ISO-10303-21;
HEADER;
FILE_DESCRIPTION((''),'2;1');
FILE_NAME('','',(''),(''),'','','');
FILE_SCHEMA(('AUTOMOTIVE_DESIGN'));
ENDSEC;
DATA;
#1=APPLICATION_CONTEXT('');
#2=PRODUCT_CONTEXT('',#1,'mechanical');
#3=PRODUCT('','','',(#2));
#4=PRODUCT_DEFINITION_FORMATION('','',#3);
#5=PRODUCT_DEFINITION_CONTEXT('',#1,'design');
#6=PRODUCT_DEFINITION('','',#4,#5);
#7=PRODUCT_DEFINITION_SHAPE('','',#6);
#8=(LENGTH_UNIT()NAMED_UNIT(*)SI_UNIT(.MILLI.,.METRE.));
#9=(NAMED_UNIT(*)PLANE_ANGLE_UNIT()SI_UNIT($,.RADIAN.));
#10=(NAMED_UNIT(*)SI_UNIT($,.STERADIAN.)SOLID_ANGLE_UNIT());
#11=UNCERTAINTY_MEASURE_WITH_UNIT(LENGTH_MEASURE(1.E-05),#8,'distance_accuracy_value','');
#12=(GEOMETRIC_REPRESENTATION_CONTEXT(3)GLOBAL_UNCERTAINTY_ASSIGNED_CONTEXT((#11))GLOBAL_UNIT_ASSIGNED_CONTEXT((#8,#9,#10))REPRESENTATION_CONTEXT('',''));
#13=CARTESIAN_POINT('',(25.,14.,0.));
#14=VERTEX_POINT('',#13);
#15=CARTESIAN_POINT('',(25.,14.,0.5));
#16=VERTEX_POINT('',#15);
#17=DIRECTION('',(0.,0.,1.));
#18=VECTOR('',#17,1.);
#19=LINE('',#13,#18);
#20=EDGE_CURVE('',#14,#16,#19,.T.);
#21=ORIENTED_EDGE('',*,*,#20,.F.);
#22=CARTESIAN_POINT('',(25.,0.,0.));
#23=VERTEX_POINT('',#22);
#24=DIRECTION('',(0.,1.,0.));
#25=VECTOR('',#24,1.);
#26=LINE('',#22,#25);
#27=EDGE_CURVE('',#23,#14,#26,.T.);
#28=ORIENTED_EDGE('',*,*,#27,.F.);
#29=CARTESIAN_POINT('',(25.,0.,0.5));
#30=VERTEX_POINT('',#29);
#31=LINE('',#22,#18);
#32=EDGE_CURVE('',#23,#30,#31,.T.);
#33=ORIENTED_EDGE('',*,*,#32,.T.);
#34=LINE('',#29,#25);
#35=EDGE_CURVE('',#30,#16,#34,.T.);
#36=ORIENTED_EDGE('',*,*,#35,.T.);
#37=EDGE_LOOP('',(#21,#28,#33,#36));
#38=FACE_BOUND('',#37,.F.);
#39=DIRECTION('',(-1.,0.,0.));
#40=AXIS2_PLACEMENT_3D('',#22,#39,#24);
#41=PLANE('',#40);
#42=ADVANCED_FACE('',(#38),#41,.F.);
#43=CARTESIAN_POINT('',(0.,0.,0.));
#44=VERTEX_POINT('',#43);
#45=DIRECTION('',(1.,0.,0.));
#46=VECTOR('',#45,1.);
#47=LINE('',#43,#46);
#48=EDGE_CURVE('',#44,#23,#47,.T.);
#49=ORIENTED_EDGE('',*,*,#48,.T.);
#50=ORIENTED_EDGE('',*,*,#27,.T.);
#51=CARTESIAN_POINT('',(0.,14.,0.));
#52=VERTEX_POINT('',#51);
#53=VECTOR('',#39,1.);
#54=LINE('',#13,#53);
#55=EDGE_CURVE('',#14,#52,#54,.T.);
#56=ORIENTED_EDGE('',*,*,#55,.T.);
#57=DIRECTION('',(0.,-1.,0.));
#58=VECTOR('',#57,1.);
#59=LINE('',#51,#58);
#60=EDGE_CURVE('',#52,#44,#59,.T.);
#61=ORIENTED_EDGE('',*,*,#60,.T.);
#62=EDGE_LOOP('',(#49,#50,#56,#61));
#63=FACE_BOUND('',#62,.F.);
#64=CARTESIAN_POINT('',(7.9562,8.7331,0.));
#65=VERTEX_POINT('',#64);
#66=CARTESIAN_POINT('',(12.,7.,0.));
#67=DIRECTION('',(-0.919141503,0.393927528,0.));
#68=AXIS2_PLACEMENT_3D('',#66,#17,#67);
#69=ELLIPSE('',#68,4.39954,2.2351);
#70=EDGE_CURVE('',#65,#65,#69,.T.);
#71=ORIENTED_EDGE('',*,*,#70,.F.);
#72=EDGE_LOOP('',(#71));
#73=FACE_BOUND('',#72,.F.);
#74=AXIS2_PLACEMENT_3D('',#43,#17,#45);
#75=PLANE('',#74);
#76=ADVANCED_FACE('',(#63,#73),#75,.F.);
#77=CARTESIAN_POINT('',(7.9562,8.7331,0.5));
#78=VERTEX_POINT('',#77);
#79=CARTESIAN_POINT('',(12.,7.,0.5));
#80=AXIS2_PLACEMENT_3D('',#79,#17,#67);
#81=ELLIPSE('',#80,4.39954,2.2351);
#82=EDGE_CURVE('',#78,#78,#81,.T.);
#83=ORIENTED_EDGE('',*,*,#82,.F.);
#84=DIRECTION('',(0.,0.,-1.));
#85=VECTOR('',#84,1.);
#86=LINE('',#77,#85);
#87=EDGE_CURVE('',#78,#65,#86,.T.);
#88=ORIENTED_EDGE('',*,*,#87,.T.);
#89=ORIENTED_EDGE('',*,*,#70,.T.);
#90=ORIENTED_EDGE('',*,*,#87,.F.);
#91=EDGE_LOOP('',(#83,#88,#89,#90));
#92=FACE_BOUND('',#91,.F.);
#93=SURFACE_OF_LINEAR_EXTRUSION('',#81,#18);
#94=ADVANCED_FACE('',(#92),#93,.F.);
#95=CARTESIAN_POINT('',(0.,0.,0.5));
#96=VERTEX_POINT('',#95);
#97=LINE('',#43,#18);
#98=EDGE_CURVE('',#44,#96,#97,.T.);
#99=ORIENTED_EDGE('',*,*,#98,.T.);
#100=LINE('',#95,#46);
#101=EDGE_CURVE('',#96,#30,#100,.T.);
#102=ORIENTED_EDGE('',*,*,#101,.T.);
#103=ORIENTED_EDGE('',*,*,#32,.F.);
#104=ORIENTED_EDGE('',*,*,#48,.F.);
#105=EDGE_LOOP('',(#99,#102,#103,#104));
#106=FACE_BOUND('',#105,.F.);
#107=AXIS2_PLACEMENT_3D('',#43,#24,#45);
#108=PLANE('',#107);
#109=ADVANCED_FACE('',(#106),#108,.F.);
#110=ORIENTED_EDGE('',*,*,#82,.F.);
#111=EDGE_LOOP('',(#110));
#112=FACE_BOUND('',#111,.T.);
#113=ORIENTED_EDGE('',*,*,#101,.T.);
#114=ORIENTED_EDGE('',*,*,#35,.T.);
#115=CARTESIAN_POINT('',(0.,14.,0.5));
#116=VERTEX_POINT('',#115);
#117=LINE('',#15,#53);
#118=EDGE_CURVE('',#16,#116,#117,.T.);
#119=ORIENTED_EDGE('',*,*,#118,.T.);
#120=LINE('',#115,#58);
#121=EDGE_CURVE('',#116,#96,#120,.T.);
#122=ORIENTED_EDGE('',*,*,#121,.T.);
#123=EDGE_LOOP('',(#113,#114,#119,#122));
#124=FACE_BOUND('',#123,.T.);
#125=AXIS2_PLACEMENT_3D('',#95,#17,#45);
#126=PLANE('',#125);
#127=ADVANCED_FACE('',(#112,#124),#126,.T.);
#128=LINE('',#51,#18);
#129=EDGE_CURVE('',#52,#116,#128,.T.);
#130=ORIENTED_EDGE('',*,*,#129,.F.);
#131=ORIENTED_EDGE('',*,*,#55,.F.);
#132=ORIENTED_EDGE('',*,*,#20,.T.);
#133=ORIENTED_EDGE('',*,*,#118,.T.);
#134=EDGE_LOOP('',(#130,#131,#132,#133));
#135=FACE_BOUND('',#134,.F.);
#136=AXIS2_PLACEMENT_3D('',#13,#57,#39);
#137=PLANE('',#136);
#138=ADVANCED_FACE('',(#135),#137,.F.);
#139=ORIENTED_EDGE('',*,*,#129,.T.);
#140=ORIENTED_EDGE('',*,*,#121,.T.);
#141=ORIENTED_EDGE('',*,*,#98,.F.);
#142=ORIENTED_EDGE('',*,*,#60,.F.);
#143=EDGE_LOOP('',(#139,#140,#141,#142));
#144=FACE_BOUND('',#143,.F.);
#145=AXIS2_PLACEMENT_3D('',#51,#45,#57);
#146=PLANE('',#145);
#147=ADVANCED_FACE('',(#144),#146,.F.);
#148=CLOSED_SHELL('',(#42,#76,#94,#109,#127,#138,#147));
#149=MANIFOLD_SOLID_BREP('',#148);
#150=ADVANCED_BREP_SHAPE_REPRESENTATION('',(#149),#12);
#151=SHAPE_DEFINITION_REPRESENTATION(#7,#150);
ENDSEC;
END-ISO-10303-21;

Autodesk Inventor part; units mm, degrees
ref_plane "YZ Plane" through (0, 0, 0) normal (1, 0, 0) x (0, 1, 0)
ref_plane "XZ Plane" through (0, 0, 0) normal (0, 1, 0) x (-1, 0, 0)
ref_plane "XY Plane" through (0, 0, 0) normal (0, 0, 1) x (1, 0, 0)
sketch "Sketch2" plane through (0, 0, 0) normal (0, 0, 1) x (1, 0, 0)
  line L0 (0, 0) -> (25, 0)
  line L1 (25, 0) -> (25, 14)
  line L2 (25, 14) -> (0, 14)
  line L3 (0, 14) -> (0, 0)
extrude "Plate1" add sketch "Sketch2" along normal blind 0.5
sketch "Sketch3" plane through (0, 0, 0.5) normal (0, 0, 1) x (1, 0, 0)
  ellipse E0 centre (12, 7) end of major axis (7.9562, 8.7331) minor radius 2.2351
extrude "Cut1" cut sketch "Sketch3" against normal blind 0.5
equation "\"d5\" = Thickness"
equation "\"BendRadius\" = Thickness"
equation "\"BendReliefWidth\" = Thickness"
equation "\"BendReliefDepth\" = 0.5 * Thickness"
equation "\"CornerReliefSize\" = 4 * Thickness"
equation "\"MinimumRemnant\" = 2 * Thickness"
equation "\"TransitionRadius\" = BendRadius"
equation "\"JacobiRadiusSize\" = Thickness"
equation "\"GapSize\" = Thickness"
equation "\"d4\" = BendRadius"
equation "\"Thickness\" = 0.5"
properties part number "ThickThinProfile"
